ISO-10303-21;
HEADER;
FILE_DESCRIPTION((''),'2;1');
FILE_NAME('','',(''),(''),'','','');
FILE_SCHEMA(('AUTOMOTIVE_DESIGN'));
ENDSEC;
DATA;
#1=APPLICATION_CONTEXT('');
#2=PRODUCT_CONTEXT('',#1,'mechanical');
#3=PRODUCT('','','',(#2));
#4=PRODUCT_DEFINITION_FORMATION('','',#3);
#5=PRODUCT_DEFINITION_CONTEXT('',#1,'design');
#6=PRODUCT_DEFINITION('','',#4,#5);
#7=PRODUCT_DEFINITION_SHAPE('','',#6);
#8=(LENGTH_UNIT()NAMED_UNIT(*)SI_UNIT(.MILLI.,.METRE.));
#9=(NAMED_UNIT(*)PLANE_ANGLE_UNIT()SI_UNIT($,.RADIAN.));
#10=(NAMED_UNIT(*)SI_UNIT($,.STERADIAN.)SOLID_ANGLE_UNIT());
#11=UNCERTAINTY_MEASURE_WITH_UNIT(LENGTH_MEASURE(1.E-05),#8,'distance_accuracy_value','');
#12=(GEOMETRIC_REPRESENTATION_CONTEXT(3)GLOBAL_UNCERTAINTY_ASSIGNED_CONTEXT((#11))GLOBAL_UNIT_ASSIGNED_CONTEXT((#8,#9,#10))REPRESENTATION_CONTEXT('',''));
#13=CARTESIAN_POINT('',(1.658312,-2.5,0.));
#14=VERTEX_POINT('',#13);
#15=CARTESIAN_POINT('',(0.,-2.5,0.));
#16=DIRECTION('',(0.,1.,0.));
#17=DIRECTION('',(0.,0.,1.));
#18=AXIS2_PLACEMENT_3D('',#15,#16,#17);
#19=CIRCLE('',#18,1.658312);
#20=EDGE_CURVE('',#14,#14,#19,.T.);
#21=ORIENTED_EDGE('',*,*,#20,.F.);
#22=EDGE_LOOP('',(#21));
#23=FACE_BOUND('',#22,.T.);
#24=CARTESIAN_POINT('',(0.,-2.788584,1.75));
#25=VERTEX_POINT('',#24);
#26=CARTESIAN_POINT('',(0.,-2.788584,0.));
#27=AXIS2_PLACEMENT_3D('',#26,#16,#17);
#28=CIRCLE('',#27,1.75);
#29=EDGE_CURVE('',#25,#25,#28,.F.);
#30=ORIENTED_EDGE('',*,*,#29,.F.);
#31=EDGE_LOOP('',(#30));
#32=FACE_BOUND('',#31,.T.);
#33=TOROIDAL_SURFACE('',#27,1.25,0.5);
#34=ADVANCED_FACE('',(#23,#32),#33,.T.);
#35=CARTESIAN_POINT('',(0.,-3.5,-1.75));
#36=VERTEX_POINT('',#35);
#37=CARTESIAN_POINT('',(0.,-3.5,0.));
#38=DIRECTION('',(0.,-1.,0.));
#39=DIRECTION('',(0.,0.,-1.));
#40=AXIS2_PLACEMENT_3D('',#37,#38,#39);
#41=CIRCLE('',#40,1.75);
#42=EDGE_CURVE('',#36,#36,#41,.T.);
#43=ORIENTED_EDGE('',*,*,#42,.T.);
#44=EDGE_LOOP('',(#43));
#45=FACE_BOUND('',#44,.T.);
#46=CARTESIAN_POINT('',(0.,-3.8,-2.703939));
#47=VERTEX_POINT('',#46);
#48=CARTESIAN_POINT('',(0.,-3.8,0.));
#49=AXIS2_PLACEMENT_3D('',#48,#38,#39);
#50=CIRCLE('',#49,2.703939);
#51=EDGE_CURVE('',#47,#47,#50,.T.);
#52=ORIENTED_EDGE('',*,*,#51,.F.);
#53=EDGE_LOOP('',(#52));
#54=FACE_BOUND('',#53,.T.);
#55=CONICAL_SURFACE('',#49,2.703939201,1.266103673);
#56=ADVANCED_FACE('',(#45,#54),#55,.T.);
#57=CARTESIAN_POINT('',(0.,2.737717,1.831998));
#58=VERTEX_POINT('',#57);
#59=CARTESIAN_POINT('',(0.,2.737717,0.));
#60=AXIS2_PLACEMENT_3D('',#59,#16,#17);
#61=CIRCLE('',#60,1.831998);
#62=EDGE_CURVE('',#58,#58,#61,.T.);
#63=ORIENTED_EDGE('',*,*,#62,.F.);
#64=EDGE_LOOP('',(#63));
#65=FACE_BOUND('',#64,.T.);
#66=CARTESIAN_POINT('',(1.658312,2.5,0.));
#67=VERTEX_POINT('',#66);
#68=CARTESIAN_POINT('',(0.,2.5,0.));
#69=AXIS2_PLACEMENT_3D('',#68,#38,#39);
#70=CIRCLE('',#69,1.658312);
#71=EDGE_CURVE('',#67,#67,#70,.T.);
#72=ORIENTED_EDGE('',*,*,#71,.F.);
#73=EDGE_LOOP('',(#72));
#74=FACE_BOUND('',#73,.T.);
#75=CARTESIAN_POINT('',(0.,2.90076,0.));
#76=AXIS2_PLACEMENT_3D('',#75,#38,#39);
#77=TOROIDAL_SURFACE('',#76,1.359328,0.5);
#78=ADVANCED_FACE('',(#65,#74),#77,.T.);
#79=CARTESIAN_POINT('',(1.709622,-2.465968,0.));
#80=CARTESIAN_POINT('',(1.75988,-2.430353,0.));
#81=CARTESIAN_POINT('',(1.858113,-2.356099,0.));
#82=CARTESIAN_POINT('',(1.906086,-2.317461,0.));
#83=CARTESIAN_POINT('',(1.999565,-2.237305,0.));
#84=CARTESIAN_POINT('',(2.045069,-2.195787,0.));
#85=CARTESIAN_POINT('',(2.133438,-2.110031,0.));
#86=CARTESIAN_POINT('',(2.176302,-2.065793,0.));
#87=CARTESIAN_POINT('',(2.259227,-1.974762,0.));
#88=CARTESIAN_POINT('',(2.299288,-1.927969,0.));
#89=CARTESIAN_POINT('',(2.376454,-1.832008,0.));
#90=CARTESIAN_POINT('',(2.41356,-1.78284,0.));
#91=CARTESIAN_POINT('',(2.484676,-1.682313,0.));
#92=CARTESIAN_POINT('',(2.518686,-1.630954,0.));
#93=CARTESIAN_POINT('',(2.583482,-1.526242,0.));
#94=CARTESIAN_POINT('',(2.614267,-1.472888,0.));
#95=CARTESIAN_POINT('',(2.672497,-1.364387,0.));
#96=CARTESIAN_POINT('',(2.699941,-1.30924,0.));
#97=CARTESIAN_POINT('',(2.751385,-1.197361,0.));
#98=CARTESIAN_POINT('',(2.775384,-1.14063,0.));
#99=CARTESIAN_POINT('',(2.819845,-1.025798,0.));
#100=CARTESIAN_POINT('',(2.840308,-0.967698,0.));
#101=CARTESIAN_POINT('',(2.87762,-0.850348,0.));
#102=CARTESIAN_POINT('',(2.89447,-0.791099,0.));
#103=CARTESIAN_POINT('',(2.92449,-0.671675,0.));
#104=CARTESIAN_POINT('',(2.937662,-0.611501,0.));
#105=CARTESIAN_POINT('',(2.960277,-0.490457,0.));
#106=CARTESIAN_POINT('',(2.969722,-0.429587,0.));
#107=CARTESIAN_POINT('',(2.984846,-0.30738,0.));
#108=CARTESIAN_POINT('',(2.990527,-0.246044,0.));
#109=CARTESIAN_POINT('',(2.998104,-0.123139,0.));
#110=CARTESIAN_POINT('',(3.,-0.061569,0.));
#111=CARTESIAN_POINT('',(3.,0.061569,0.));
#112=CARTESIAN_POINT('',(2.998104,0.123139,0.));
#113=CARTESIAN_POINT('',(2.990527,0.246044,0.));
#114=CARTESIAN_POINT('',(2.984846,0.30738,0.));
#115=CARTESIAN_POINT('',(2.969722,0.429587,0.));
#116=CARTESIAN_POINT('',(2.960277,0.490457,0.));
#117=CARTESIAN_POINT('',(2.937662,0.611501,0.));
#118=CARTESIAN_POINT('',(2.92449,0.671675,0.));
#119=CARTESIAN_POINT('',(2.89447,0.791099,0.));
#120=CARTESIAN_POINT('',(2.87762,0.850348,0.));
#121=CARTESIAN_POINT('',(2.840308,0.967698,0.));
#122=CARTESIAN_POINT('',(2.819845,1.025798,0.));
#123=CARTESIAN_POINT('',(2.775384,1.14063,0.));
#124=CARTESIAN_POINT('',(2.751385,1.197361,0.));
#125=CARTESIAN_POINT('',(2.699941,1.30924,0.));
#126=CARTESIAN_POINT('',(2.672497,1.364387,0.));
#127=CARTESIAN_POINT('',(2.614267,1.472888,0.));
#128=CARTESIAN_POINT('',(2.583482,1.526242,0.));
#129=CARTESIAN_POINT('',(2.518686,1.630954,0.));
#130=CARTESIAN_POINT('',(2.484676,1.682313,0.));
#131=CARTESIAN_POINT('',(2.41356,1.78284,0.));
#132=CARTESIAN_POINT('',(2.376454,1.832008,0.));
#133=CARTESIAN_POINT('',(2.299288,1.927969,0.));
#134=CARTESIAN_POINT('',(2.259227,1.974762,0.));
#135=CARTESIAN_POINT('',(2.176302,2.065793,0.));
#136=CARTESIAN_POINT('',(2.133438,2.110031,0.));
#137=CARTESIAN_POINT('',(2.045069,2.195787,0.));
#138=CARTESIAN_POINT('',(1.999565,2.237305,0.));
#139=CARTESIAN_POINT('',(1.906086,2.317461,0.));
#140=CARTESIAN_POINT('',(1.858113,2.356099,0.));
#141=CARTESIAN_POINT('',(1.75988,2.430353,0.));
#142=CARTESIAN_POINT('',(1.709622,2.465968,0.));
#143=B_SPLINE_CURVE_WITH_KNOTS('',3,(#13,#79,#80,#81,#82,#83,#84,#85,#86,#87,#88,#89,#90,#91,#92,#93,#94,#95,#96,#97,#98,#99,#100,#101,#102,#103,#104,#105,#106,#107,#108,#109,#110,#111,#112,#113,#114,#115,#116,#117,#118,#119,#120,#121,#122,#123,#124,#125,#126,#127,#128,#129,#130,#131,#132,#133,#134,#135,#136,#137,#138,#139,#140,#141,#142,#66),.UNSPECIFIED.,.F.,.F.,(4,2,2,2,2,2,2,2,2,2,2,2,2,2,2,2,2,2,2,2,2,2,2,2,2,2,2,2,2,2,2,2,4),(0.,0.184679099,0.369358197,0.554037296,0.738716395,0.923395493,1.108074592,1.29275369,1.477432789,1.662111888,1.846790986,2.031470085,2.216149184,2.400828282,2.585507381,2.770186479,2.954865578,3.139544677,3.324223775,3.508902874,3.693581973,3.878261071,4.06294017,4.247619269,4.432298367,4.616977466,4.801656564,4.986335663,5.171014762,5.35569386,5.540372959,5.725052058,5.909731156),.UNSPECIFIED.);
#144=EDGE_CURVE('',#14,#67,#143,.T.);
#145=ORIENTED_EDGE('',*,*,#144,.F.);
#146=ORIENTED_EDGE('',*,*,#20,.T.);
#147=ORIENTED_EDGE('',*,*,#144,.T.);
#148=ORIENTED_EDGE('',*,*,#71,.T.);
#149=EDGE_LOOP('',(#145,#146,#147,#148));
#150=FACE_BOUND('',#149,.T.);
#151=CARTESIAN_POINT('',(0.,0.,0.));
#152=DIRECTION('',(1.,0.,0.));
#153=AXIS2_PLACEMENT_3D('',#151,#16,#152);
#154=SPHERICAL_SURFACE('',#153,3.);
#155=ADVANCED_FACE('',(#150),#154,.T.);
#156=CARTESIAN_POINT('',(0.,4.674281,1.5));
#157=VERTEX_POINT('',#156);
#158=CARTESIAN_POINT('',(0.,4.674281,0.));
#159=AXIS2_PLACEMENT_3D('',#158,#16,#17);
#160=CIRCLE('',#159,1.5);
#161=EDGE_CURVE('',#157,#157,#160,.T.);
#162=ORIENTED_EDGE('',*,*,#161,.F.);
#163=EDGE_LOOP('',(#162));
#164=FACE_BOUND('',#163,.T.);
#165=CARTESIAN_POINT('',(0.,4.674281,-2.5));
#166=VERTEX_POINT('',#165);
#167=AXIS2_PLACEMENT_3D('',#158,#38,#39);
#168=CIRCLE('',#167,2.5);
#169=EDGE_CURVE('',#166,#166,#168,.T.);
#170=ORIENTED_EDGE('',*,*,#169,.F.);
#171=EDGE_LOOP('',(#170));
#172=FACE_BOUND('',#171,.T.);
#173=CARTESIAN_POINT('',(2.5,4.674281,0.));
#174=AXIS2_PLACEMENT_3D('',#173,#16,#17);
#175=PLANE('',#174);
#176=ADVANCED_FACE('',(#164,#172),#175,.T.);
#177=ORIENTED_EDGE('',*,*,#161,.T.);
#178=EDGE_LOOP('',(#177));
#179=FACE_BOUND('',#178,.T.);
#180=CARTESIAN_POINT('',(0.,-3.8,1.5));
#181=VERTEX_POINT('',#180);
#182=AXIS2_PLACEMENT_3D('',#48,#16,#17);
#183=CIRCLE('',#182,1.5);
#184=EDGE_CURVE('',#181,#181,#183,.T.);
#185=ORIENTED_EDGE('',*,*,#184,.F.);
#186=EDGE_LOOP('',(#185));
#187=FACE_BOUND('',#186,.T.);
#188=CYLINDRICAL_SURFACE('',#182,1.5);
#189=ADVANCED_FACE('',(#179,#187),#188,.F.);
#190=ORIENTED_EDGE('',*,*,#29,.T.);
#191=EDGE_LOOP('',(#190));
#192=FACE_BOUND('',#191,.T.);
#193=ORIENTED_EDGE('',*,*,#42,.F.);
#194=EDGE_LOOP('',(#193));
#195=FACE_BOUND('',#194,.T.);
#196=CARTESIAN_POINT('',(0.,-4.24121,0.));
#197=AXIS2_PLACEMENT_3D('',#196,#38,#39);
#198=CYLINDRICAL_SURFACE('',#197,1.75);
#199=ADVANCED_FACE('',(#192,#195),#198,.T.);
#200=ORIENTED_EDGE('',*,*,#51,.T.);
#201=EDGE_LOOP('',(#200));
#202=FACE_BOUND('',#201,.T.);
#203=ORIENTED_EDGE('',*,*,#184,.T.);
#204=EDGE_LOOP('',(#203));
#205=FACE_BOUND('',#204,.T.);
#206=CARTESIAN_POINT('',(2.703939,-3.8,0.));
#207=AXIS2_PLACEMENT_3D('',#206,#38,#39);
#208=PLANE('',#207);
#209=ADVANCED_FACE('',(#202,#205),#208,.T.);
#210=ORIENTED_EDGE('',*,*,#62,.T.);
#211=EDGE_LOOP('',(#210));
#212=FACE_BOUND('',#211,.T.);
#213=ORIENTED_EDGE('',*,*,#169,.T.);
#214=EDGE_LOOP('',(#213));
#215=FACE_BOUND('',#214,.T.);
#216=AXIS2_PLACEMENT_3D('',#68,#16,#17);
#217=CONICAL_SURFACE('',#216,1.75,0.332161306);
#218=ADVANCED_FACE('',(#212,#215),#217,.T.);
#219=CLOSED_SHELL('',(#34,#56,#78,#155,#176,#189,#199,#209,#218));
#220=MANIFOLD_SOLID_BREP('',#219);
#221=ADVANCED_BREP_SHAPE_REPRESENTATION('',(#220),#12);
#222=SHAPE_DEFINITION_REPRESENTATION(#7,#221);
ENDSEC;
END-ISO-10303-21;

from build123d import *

# Parameters (mm, degrees)
ESQUISSE5_R             = 1.5
ENL_V_MAT_EXTRU_2_DEPTH = 10.476995662
CONG_2_R                = 0.5


with BuildPart() as part:
    # Esquisse1 → Révolution1 (revolve)
    with BuildSketch(Plane.XY):
        with BuildLine():
            Line((0, -3), (0, 3))
            ThreePointArc((0, 3), (3, 0), (0, -3))
        make_face()
    revolve(axis=Axis((0, 3, 0), (0, -1, 0)))

    # Esquisse4 → Révolution2 (revolve)
    with BuildSketch(Plane.XY, mode=Mode.PRIVATE) as r_volution2_sk:
        Polygon((1.75, 2.5), (2.5, 4.674281491), (0, 4.674281491), (0, 2.5), align=None)
    revolve(r_volution2_sk.sketch.rotate(Axis((0, -3.615713826, 0), (0, 1, 0)), 90), axis=Axis((0, -3.615713826, 0), (0, 1, 0)))

    # Esquisse6 → Révolution3 (revolve)
    with BuildSketch(Plane.XY, mode=Mode.PRIVATE) as r_volution3_sk:
        Polygon((0, -2.5), (1.75, -2.5), (1.75, -3.5), (2.703939201, -3.8), (0, -3.8), align=None)
    revolve(r_volution3_sk.sketch.rotate(Axis((0, -4.241210253, 0), (0, 1, 0)), 90), axis=Axis((0, -4.241210253, 0), (0, 1, 0)))

    # Esquisse5 → Enlèv. mat.-Extru.2 (cut, through all)
    with BuildSketch(Plane(origin=(0, 4.674281491, 0), x_dir=(1, 0, 0), z_dir=(0, 1, 0))):
        with Locations(Location((0, 0, 0), (0, 0, 270))):
            Circle(ESQUISSE5_R)
    extrude(amount=-ENL_V_MAT_EXTRU_2_DEPTH, mode=Mode.SUBTRACT)

    # Congé2
    # the kernel refuses this fillet: 0.5 mm, written as the material it takes off along each edge
    with BuildSketch(Plane(origin=(0, -2.5, 0), x_dir=(0, 0, -1), z_dir=(1, 0, 0))) as cong_2_piece_1:
        with BuildLine():
            CenterArc((1.25, -0.288584455), CONG_2_R, 0, 35.251664283)
            Line((1.75, -0.288584455), (1.75, 0))
            Line((1.75, 0), (1.658312395, 0))
        make_face()
    revolve(axis=Axis((0, -2.5, 0), (0, 1, 0)), mode=Mode.SUBTRACT)
    with BuildSketch(Plane(origin=(0, 2.5, 0), x_dir=(0, 0, -1), z_dir=(1, 0, 0))) as cong_2_piece_2:
        with BuildLine():
            CenterArc((1.359328414, 0.400760002), CONG_2_R, 306.724501908, 34.244057167)
            Line((1.831998303, 0.237716523), (1.75, 0))
            Line((1.75, 0), (1.658312395, 0))
        make_face()
    revolve(axis=Axis((0, 2.5, 0), (0, 1, 0)), mode=Mode.SUBTRACT)


solid = part.part
